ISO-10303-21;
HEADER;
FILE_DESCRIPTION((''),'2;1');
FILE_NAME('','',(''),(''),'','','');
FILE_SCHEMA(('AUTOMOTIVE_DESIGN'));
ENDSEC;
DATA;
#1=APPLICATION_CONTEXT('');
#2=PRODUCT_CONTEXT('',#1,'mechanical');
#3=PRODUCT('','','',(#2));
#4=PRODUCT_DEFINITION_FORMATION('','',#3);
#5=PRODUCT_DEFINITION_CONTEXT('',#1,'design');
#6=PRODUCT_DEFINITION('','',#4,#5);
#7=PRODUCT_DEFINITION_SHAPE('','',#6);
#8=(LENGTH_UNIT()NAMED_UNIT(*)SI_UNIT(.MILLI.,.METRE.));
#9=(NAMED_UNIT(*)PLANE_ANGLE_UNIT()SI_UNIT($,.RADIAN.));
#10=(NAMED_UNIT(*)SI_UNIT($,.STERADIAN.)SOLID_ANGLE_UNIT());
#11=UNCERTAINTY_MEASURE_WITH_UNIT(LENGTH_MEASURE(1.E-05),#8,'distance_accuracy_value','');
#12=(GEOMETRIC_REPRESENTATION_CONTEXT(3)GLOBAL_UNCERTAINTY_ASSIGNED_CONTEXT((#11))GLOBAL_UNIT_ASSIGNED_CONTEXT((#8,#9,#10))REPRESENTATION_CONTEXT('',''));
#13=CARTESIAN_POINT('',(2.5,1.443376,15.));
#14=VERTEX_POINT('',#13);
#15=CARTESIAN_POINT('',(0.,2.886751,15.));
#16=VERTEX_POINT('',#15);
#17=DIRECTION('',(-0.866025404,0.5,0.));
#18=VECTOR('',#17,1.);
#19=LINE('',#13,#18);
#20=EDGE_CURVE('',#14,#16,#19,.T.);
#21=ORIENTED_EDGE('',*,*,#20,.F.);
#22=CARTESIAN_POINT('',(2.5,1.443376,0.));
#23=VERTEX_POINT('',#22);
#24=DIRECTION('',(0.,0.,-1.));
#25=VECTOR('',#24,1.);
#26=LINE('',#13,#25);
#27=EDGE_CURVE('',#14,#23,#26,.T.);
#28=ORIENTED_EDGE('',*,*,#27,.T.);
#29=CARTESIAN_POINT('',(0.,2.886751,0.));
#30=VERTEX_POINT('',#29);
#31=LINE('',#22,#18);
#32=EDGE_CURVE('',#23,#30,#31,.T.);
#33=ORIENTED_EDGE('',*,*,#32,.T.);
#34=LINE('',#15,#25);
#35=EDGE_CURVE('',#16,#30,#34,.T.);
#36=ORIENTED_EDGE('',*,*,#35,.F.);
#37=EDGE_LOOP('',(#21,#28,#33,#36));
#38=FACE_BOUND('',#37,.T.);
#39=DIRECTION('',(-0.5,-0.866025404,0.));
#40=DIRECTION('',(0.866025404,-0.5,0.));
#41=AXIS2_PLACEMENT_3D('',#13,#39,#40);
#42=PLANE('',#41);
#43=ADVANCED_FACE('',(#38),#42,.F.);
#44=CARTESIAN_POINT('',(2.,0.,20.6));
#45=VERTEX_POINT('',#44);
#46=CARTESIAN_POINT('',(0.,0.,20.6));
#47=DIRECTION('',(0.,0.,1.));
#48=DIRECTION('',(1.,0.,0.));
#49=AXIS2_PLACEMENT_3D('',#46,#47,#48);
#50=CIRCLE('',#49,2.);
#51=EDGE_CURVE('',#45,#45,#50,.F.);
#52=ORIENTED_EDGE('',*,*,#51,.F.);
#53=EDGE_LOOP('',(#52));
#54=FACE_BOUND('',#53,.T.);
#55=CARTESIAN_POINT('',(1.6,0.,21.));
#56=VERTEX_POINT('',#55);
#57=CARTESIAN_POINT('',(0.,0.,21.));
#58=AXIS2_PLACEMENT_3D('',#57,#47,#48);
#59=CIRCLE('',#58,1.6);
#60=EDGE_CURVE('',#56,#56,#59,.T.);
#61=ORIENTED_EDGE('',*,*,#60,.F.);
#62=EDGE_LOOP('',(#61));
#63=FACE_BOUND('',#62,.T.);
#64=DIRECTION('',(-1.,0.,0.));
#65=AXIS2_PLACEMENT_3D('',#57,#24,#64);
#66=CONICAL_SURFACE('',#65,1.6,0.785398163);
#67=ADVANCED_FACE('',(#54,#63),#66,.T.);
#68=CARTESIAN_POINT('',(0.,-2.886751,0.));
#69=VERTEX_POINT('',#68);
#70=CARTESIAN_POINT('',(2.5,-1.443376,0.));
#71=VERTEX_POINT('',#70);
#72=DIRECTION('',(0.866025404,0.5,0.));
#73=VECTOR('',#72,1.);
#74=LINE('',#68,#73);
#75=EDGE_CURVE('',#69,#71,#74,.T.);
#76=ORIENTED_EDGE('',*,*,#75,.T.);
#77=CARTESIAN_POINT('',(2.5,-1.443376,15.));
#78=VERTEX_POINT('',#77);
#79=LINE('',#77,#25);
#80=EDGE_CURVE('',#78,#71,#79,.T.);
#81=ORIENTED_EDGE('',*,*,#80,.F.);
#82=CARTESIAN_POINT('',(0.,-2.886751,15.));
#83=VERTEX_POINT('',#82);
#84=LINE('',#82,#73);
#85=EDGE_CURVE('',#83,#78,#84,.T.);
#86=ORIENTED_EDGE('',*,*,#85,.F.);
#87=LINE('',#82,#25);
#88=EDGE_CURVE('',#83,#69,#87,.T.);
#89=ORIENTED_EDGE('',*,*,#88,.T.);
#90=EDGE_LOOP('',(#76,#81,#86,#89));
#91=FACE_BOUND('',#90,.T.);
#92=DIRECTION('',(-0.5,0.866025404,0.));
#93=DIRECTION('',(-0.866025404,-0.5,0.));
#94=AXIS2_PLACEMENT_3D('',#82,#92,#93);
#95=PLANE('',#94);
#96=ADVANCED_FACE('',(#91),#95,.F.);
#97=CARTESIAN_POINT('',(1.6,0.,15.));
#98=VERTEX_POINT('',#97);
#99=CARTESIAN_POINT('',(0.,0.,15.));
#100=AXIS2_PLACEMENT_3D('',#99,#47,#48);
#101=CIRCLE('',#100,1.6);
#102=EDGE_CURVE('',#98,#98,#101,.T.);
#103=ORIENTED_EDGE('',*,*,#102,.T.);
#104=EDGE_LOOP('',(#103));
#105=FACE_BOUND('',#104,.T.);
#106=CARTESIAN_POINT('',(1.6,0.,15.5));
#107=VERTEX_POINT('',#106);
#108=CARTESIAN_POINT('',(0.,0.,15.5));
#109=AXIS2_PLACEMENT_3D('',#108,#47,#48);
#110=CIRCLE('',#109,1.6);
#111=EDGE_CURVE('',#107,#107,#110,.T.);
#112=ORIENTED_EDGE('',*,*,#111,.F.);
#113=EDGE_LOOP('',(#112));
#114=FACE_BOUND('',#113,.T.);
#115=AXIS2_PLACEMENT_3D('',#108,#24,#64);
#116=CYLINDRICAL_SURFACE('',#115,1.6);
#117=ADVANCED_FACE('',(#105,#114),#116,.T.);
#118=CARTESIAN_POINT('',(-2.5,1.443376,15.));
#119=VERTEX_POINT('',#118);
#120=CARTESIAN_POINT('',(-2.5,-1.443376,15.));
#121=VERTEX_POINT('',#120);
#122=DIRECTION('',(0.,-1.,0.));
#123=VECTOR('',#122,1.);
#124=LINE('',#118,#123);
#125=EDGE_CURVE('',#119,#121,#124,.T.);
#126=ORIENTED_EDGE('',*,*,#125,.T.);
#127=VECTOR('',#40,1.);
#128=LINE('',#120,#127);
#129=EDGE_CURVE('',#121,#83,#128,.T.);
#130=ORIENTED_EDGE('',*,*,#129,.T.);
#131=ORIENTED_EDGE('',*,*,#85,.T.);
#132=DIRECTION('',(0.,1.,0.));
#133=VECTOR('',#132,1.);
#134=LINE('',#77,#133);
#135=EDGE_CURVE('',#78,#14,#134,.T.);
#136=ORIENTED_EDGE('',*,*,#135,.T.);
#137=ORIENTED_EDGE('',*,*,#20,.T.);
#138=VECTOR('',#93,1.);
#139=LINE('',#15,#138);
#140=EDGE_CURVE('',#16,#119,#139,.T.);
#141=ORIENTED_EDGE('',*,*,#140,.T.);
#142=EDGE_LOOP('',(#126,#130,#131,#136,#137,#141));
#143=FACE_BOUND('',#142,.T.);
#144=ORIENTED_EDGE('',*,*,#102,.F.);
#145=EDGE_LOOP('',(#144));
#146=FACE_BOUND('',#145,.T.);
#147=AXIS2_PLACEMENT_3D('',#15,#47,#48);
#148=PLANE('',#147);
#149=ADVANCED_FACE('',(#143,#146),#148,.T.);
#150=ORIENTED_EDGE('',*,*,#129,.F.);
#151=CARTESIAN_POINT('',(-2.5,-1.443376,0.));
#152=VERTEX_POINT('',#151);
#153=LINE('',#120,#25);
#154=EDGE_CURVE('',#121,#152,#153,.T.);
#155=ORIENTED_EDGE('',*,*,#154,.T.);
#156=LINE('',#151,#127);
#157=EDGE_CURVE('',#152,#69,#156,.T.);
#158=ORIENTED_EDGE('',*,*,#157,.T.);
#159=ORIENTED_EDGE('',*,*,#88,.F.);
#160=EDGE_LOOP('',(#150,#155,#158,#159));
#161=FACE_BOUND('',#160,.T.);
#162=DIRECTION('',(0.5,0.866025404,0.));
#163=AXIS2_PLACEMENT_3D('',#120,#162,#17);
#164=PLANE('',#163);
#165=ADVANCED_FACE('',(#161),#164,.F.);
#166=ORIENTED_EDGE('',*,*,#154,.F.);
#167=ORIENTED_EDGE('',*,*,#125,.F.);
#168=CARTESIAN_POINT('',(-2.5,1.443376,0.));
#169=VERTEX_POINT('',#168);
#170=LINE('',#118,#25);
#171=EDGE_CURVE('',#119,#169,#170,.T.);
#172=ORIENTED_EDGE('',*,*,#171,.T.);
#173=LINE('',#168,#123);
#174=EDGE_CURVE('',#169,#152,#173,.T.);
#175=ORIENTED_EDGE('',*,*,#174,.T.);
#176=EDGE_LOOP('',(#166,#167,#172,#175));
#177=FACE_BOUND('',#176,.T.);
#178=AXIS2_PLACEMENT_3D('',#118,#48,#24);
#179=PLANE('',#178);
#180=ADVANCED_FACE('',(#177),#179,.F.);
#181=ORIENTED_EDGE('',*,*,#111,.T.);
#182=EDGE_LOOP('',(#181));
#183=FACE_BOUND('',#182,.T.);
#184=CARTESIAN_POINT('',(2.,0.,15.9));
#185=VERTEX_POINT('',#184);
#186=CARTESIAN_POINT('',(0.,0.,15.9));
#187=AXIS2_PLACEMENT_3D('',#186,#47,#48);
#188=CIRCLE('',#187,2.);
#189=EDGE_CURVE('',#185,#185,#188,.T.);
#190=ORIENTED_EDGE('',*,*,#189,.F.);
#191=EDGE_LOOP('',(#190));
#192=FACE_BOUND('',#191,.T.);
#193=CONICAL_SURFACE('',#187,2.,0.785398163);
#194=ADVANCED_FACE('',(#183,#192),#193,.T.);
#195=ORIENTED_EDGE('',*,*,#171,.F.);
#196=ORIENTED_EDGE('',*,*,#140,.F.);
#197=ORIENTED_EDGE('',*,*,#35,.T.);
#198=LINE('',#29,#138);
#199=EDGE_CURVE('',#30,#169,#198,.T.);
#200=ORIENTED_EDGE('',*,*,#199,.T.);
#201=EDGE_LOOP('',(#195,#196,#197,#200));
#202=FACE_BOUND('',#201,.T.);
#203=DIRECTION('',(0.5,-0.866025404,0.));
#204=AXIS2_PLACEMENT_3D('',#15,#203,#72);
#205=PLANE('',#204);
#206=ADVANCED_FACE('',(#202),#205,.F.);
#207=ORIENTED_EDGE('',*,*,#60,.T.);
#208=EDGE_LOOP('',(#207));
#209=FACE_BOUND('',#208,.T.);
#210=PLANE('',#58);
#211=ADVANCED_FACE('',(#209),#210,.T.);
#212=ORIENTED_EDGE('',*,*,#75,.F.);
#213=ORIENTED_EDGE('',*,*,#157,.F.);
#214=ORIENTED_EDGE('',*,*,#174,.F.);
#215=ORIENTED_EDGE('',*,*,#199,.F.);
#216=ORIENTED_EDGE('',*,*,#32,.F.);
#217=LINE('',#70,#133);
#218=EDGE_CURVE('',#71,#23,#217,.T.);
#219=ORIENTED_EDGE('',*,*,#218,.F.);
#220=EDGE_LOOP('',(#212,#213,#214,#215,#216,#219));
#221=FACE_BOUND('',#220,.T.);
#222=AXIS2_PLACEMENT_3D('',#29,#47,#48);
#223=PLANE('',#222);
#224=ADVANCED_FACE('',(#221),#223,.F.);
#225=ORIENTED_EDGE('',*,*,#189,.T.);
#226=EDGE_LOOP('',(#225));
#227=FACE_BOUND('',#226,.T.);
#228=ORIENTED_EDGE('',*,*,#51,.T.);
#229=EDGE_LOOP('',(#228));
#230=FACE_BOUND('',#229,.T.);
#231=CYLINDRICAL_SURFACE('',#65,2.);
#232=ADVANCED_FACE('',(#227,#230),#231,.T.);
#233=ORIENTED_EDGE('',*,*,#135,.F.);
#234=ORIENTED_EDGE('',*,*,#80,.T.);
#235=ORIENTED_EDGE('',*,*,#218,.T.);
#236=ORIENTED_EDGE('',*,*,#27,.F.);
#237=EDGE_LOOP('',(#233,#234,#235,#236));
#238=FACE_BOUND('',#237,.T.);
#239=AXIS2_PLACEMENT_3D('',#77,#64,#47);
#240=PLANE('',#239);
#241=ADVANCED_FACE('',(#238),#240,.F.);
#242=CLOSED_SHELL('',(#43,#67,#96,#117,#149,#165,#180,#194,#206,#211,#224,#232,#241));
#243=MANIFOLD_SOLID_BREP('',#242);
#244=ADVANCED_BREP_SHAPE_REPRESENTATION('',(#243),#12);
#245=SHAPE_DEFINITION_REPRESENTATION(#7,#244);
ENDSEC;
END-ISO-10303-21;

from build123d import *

# Parameters (mm, degrees)
EXTRUDE_1_DEPTH     = 15
SKETCH_2_R          = 2
EXTRUDE_2_DEPTH     = 6
SKETCH_3_R          = 2
SKETCH_3_R_2        = 1.6
CUT_EXTRUDE_3_DEPTH = 0.5
CHAMFER_1_SIZE      = 0.4


with BuildPart() as part:
    # Эскиз1 → Вытянуть1 (new body)
    with BuildSketch(Plane.XY):
        Polygon((0, 2.886751346), (-2.5, 1.443375673), (-2.5, -1.443375673), (0, -2.886751346), (2.5, -1.443375673), (2.5, 1.443375673), align=None)
    extrude(amount=EXTRUDE_1_DEPTH)

    # Эскиз2 → Вытянуть2 (add)
    with BuildSketch(Plane.XY.offset(15)):
        Circle(SKETCH_2_R)
    extrude(amount=EXTRUDE_2_DEPTH)

    # Эскиз3 → Вырез-Вытянуть3 (cut)
    with BuildSketch(Plane.XY.offset(15)):
        Circle(SKETCH_3_R)
        Circle(SKETCH_3_R_2, mode=Mode.SUBTRACT)
    extrude(amount=CUT_EXTRUDE_3_DEPTH, mode=Mode.SUBTRACT)

    # Фаска1
    chamfer_1_edges = [part.edges().sort_by_distance(p)[0] for p in [
        (-2, 0, 21),
        (-2, 0, 15.5),
    ]]
    chamfer(chamfer_1_edges, length=CHAMFER_1_SIZE - 0.0001)  # a hair under: the kernel refuses the full size


solid = part.part
